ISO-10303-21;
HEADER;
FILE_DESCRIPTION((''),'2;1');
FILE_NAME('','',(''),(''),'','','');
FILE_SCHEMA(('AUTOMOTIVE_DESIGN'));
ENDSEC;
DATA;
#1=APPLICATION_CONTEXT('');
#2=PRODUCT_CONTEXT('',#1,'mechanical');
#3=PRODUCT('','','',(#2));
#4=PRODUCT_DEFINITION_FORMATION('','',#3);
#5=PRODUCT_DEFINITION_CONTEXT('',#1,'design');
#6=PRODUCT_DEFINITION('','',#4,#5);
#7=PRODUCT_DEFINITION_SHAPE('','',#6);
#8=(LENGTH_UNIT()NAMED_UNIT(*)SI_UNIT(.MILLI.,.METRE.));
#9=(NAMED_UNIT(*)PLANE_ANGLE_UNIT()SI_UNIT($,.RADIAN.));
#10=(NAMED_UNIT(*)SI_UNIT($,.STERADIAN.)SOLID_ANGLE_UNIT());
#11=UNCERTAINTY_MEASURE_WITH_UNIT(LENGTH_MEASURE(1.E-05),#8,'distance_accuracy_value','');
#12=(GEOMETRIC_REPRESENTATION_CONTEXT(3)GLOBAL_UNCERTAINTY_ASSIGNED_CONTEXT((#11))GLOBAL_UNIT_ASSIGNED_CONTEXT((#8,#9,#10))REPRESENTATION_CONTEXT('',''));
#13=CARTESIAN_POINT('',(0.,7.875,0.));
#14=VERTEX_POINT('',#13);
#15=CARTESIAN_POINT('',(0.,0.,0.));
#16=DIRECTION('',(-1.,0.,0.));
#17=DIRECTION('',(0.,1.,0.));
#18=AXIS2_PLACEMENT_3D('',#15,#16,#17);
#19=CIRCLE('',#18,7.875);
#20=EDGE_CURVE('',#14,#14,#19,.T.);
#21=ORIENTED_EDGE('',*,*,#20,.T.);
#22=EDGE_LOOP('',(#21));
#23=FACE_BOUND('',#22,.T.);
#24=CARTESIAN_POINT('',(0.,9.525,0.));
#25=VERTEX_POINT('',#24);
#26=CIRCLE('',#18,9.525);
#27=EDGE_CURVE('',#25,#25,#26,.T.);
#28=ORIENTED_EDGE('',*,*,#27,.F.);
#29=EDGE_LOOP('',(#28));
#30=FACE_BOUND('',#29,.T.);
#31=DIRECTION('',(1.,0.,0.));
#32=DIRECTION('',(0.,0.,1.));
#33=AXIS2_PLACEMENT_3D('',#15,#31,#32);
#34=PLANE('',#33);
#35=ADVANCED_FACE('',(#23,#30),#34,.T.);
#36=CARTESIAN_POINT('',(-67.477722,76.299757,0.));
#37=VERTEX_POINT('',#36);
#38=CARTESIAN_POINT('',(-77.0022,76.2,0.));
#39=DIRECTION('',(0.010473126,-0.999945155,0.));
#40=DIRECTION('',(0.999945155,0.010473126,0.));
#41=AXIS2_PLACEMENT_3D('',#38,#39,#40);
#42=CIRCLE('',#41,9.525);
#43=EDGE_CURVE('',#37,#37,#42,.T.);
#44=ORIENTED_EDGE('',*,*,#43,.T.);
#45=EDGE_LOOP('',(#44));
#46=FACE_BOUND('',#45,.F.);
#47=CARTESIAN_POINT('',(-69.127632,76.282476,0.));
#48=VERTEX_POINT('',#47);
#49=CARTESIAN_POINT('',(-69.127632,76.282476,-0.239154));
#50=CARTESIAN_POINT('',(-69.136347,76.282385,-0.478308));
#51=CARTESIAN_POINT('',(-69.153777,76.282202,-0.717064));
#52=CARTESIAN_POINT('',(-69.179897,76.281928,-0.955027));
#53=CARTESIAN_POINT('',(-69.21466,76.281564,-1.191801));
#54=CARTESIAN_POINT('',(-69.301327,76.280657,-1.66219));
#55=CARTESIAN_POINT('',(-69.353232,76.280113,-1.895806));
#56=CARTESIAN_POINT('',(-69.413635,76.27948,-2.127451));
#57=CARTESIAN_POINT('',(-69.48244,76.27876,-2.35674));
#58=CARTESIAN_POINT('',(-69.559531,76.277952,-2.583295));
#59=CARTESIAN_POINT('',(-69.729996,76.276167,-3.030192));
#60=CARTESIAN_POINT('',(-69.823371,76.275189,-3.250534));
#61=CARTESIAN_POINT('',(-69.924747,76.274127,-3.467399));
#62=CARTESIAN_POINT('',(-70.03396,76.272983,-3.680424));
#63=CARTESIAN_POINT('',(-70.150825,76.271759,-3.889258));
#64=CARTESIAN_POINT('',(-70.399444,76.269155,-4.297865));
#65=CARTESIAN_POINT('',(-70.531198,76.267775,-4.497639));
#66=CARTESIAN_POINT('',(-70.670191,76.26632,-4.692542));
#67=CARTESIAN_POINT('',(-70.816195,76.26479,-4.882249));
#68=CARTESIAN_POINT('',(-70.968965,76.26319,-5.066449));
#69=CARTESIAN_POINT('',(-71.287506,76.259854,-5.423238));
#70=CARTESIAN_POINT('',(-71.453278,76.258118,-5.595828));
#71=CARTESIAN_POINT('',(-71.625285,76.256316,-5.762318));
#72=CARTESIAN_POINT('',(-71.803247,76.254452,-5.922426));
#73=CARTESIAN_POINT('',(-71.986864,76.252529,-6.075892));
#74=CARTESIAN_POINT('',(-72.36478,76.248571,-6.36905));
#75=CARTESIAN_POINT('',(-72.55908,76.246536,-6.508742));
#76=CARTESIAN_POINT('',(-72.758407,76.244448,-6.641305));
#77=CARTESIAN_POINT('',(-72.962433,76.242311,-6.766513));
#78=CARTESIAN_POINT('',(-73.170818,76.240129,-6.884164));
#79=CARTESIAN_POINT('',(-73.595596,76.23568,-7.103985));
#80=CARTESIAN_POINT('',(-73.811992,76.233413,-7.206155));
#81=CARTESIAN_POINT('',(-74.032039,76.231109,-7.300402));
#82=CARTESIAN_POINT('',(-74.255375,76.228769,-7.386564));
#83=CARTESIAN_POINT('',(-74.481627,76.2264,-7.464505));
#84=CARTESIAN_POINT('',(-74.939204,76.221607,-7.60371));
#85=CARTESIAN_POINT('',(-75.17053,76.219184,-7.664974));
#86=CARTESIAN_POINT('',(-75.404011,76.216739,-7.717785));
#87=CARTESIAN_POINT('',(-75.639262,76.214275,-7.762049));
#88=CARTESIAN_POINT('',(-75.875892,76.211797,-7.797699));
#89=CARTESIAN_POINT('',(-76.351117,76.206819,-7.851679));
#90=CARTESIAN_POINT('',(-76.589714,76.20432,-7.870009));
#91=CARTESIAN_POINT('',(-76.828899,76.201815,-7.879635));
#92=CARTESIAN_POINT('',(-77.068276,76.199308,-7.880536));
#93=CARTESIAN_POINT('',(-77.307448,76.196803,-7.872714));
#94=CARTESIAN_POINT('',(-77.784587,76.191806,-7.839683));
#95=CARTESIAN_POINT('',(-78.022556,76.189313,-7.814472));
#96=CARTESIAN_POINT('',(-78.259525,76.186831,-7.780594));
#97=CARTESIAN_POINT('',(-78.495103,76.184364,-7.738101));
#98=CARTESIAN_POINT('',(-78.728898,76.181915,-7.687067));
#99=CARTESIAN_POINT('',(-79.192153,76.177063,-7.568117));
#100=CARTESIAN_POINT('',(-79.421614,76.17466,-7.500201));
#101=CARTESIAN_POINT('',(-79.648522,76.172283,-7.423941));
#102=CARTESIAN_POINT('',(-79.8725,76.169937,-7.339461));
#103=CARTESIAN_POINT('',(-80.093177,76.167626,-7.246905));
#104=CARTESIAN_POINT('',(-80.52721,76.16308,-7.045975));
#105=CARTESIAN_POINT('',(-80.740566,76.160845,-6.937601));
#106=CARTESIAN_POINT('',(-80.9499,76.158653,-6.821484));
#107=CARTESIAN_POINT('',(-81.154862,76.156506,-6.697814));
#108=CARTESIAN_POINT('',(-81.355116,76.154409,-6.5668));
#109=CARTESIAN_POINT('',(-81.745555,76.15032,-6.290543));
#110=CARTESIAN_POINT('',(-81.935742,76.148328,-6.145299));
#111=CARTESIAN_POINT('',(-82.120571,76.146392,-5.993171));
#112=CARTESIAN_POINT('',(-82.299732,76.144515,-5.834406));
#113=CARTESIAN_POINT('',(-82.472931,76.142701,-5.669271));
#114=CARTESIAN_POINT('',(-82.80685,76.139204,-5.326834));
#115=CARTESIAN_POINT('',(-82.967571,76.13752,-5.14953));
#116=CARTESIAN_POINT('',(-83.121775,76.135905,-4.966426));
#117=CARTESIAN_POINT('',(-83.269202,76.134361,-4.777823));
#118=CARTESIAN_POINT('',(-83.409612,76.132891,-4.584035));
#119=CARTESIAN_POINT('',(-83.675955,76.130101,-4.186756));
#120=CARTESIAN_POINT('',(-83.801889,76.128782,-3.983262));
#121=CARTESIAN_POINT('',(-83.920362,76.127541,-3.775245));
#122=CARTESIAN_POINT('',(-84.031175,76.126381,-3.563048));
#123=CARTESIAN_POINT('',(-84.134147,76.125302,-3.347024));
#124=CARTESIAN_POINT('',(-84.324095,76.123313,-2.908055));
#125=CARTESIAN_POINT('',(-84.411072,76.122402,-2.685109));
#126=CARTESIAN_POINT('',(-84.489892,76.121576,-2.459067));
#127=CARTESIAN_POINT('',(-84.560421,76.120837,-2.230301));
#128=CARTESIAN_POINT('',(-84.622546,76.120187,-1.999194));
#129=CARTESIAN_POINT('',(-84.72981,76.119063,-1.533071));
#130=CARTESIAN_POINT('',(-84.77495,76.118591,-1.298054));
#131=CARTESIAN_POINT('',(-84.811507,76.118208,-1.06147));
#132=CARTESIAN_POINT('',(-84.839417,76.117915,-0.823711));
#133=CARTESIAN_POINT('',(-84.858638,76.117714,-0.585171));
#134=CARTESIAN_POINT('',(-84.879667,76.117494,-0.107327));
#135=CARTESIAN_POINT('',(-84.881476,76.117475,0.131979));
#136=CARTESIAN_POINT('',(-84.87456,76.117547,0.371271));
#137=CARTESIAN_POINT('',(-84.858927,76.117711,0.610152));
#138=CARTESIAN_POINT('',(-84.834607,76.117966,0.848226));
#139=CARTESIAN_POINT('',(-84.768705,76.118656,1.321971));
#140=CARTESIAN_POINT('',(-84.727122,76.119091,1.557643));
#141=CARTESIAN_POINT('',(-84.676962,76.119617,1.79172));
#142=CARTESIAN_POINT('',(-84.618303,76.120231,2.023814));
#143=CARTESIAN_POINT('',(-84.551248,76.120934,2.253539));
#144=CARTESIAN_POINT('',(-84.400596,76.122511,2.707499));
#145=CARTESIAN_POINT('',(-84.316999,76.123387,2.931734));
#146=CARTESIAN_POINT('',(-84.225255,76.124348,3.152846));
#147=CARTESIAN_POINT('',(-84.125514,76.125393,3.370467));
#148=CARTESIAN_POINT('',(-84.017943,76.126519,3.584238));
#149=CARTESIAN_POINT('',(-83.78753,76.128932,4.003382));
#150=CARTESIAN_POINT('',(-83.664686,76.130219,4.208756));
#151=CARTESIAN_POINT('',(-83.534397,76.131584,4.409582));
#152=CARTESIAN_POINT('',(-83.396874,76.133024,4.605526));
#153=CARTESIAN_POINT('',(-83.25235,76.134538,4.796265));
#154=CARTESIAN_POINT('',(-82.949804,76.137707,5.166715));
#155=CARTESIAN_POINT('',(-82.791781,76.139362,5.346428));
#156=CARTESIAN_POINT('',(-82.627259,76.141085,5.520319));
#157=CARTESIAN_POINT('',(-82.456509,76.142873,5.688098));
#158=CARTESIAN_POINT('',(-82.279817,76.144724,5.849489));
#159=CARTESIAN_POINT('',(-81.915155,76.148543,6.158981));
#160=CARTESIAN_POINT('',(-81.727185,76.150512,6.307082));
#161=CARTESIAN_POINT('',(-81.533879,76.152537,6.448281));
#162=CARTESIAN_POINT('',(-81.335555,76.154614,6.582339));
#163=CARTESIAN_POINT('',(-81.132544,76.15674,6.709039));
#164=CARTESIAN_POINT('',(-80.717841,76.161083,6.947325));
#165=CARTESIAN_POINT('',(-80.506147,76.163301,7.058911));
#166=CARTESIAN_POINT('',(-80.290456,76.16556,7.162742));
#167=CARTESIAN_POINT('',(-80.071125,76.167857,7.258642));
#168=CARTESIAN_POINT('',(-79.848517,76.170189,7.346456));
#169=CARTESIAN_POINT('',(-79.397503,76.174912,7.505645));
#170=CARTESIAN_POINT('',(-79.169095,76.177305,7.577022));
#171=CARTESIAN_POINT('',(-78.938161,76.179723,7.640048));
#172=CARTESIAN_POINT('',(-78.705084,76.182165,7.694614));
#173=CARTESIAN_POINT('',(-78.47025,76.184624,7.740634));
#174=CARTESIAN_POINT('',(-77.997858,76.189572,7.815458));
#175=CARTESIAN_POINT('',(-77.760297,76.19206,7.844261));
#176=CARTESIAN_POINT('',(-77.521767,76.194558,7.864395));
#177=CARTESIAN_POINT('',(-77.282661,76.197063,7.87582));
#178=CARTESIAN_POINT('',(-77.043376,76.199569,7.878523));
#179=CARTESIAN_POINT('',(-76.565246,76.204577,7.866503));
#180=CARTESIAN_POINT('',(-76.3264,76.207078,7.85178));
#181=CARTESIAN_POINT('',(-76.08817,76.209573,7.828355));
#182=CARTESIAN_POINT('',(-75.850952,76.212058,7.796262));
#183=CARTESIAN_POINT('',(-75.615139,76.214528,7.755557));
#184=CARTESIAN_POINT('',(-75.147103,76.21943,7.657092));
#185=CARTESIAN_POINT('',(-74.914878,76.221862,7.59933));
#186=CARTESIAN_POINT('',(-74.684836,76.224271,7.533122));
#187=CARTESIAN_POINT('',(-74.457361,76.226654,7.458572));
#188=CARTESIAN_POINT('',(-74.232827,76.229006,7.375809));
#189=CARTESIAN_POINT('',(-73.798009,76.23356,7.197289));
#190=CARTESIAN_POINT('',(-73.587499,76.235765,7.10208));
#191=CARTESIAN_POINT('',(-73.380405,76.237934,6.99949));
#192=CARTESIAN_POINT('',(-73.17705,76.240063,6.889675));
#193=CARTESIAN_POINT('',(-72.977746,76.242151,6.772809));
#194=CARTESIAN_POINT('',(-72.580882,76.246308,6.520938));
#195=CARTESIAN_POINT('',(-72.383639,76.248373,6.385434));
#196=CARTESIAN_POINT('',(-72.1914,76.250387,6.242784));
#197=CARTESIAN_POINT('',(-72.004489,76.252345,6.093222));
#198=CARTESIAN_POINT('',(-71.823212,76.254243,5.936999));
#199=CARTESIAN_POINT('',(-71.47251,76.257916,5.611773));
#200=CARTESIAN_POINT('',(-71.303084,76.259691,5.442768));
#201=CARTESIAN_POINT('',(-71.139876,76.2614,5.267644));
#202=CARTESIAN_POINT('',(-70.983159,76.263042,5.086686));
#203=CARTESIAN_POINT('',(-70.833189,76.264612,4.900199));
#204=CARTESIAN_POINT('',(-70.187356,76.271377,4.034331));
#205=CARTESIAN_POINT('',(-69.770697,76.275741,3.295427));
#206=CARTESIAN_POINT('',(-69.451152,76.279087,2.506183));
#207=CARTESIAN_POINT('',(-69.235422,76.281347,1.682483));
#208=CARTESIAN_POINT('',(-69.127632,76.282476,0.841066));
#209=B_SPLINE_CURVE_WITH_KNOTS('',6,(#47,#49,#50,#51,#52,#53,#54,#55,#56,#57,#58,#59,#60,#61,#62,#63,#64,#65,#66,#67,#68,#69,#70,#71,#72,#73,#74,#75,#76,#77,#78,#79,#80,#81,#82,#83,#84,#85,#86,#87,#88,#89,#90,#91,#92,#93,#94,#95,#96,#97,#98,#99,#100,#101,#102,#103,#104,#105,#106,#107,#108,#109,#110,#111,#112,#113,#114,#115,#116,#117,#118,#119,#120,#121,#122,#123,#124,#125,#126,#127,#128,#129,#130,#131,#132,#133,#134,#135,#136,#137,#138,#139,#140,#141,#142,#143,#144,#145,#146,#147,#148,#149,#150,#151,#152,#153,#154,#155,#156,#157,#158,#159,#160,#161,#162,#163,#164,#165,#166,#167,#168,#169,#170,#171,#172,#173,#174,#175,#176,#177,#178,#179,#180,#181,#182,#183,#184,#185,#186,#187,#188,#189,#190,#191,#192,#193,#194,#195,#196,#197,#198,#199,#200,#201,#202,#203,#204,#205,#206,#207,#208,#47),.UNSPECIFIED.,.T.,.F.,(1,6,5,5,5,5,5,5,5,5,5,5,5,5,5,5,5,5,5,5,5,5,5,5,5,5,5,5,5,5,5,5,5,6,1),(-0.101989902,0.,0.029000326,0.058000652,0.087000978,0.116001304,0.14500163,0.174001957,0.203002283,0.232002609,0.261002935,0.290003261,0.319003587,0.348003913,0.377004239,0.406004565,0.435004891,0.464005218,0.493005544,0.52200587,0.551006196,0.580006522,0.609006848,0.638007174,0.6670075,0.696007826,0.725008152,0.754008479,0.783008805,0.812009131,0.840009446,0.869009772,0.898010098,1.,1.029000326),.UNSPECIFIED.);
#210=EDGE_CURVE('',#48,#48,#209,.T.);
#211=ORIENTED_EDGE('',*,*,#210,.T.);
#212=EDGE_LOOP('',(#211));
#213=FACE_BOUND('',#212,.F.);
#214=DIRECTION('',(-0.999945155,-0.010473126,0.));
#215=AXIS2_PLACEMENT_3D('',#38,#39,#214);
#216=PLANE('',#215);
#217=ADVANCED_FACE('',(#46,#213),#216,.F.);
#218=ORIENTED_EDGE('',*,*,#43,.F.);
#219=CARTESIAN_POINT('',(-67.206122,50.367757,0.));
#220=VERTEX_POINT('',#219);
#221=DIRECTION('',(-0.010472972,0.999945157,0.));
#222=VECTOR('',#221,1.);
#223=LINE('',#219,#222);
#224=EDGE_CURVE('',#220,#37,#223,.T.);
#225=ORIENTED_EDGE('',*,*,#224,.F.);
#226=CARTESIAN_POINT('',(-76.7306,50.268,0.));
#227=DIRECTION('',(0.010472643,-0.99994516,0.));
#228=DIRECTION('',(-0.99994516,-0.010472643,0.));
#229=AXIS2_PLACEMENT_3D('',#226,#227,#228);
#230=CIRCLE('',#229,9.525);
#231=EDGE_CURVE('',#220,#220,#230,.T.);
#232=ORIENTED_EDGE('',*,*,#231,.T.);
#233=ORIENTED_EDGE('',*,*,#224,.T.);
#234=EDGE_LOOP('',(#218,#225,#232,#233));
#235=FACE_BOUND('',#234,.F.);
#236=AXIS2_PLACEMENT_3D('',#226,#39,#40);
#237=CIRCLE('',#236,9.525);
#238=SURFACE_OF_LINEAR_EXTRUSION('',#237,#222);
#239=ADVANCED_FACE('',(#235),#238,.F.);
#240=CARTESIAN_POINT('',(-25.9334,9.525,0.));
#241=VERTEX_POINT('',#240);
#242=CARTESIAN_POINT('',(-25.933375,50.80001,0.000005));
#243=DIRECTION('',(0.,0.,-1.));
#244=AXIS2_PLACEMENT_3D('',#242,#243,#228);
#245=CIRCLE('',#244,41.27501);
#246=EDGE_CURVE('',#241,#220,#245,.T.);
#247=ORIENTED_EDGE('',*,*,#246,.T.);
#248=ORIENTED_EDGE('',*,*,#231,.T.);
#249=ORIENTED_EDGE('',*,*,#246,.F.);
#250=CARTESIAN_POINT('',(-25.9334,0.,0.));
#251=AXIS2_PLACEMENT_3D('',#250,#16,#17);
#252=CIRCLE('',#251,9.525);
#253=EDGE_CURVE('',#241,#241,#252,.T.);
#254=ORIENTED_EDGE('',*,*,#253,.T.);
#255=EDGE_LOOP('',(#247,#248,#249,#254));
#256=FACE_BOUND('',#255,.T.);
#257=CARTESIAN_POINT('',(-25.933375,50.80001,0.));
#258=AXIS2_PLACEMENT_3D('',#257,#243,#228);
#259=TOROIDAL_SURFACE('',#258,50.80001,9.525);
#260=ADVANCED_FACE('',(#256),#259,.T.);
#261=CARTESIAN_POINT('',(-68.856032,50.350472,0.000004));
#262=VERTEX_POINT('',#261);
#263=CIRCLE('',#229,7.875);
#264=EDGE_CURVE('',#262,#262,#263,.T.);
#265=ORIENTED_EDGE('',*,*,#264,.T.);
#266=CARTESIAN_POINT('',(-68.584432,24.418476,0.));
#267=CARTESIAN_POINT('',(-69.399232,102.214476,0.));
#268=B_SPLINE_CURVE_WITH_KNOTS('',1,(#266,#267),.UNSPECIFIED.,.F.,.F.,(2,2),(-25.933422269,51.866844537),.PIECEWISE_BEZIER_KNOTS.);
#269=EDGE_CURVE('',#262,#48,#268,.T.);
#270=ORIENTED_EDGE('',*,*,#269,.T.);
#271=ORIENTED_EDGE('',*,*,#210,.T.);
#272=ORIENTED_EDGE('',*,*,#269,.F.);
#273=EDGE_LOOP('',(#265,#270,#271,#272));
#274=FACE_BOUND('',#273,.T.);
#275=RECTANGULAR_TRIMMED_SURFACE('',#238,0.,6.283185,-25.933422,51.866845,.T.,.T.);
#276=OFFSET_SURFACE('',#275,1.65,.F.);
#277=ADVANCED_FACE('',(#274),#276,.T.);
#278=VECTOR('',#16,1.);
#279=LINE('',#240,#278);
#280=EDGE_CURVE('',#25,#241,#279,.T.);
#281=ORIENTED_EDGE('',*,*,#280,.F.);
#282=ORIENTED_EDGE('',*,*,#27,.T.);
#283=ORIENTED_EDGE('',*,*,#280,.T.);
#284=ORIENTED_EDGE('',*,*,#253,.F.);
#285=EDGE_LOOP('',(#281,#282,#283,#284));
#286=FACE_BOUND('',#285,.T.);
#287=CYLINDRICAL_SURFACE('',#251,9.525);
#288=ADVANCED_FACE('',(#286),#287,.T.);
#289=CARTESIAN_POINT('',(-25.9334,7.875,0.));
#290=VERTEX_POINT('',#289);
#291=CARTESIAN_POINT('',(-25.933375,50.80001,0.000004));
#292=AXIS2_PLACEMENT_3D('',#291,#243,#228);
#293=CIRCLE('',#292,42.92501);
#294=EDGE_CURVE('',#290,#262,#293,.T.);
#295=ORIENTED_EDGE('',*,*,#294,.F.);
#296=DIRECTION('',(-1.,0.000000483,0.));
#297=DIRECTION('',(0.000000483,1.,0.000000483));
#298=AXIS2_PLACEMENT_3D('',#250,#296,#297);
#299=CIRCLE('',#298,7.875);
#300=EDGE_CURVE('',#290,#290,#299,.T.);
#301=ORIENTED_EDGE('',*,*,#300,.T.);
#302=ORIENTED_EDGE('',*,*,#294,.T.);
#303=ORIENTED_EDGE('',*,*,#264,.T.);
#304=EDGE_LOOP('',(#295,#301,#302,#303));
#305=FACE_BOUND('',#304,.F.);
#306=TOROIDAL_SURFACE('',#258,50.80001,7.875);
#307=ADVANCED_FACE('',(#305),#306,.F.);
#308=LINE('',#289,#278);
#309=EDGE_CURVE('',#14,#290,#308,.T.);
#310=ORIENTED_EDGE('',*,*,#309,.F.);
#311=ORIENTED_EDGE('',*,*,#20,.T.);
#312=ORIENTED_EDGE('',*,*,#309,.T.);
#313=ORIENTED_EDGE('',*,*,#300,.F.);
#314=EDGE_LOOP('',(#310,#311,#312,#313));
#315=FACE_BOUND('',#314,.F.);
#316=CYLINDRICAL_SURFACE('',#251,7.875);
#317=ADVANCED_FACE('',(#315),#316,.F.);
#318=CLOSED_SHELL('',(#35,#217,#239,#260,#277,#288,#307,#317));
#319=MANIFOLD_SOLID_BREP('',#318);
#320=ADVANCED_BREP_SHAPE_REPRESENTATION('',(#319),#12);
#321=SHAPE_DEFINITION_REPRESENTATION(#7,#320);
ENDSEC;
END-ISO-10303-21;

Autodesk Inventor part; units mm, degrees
ref_plane "YZ Plane" through (0, 0, 0) normal (1, 0, 0) x (0, 1, 0)
ref_plane "XZ Plane" through (0, 0, 0) normal (0, 1, 0) x (-1, 0, 0)
ref_plane "XY Plane" through (0, 0, 0) normal (0, 0, 1) x (1, 0, 0)
sketch "Sketch1" plane through (0, 0, 0) normal (0, 0, 1) x (1, 0, 0)
  line L0 (-76.7306, 50.268) -> (-77.0022, 76.2)
  line L1 (-25.9334, 0) -> (0, 0)
  arc A0 (-76.7306, 50.268) -> (-25.9334, 0) centre (-25.9334, 50.8) ccw
  dimension "d2" = 50.8
  dimension "d3" = 76.2
  dimension "d4" = 76.2
  dimension "d11" = 90.6
sketch "Sketch2" plane through (0, 0, 0) normal (1, 0, 0) x (0, 1, 0)
  circle A0 centre (0, 0) radius 9.525
  dimension "d7" = 19.05
sweep "Sweep1" add profiles "Sketch2" path "Sketch1"
shell "Shell1" thickness 1.65 removed faces 2 at (0, 1.5742, -0.5767) at (-73.9196, 76.2323, -0.7598)
equation "\"d2\" = 0.666667 * d4"
equation "\"d4\" = d3"
properties part number "90.6 DEG (ASME BPE) ELB-19.05"
